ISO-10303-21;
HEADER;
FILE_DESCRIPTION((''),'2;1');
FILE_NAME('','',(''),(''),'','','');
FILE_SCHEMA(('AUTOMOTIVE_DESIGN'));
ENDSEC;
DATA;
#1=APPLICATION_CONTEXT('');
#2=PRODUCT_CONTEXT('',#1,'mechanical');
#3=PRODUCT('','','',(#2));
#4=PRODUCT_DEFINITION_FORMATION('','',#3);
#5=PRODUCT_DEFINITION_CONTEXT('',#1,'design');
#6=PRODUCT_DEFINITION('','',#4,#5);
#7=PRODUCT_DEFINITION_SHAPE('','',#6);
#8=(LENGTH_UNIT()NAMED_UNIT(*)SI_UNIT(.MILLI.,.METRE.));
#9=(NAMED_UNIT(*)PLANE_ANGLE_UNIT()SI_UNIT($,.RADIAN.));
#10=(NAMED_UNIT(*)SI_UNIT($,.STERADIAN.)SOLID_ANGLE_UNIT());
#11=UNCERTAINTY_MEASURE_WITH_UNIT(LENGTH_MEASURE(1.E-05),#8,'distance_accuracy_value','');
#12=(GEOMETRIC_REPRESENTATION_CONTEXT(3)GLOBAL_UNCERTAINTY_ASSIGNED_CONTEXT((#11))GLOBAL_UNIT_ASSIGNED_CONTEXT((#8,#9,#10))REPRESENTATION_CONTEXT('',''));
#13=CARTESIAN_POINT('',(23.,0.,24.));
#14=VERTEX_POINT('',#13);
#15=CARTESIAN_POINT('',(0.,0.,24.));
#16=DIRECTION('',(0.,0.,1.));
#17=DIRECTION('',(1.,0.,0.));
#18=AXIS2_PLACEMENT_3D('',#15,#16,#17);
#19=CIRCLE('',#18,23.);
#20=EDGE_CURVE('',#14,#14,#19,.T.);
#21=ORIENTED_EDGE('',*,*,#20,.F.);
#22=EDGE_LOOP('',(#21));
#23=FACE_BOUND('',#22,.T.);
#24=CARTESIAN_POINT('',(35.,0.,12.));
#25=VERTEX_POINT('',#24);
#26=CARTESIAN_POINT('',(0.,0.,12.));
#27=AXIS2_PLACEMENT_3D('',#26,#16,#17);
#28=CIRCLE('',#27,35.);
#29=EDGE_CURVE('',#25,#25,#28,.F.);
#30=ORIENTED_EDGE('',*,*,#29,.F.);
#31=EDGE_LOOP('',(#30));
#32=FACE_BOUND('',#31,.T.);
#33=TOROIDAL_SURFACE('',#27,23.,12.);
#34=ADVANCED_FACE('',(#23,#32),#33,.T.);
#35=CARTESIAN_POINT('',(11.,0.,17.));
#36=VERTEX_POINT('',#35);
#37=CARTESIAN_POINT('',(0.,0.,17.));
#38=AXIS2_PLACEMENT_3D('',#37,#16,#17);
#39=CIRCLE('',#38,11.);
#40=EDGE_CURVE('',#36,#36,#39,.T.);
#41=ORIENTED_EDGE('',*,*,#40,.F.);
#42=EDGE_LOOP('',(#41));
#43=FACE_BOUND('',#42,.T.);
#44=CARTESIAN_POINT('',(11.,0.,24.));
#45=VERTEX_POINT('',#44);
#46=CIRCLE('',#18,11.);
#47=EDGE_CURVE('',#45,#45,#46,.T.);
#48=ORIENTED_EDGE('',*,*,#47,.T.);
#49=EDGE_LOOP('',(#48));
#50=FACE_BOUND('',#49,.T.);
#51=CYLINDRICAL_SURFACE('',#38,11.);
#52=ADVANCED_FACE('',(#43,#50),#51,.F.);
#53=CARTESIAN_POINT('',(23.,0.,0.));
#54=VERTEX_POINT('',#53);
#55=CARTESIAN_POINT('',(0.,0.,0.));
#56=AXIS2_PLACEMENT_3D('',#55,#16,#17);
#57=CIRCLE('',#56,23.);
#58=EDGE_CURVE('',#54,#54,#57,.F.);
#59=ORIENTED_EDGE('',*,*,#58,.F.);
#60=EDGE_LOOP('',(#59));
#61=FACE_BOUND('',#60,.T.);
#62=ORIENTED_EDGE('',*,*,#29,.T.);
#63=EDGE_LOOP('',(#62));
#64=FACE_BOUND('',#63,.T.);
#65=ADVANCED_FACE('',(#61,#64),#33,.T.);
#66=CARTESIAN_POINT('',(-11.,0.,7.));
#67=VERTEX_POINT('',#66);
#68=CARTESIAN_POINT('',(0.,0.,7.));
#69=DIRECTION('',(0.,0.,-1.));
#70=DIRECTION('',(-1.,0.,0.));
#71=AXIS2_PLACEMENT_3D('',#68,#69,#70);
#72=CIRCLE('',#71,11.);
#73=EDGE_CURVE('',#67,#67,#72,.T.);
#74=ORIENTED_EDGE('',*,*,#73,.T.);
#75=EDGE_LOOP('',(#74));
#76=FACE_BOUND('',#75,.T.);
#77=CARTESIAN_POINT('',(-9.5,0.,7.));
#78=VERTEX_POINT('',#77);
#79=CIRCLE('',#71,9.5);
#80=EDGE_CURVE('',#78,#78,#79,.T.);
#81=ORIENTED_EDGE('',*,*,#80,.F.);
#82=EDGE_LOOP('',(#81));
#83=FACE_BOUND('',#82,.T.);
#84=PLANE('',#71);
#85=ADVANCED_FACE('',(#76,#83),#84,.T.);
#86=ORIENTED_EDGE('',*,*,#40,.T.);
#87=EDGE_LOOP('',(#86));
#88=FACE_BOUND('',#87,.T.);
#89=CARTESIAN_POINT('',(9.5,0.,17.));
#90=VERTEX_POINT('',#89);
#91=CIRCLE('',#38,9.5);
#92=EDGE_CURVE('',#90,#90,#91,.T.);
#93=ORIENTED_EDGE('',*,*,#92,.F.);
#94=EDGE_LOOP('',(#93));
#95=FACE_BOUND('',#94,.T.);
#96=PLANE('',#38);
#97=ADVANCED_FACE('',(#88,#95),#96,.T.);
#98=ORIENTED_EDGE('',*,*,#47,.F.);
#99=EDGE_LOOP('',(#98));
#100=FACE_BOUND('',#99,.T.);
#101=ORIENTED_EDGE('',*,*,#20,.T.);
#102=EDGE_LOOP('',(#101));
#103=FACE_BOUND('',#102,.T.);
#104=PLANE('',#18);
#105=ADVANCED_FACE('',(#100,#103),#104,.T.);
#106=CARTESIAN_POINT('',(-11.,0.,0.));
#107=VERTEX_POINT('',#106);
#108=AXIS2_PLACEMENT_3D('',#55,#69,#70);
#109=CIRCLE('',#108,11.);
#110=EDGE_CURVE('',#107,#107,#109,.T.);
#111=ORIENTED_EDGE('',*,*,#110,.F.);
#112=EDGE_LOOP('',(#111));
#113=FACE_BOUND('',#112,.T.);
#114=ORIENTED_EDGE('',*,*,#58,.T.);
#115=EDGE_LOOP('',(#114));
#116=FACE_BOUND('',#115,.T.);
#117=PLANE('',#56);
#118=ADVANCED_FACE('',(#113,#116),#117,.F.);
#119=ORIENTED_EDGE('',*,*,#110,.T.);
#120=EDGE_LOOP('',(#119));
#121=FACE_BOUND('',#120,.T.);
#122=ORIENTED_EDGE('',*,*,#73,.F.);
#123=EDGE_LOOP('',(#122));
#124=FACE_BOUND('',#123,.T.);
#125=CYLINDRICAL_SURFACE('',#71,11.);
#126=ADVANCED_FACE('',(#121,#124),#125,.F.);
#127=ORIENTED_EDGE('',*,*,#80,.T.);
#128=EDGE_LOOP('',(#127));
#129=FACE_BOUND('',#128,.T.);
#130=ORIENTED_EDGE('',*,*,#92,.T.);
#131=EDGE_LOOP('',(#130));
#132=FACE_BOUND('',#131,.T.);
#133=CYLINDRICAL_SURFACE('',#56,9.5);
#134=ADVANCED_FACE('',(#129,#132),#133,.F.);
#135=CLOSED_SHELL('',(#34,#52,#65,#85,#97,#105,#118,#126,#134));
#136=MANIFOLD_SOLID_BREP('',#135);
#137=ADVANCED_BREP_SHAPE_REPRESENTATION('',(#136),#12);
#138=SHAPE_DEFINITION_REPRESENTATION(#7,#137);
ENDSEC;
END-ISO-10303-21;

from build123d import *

# Parameters (mm, degrees)
ESQUISSE1_R             = 35
EXTRUSION1_DEPTH        = 24
CONG_1_R                = 12
CONG_2_R                = 12
ESQUISSE2_R             = 11
ENL_V_MAT_EXTRU_1_DEPTH = 7
ENL_V_START             = -7
ESQUISSE3_R             = 11
ENL_V_MAT_EXTRU_2_DEPTH = 7
ESQUISSE5_R             = 9.5
ENL_V_MAT_EXTRU_3_DEPTH = 53.335456499


with BuildPart() as part:
    # Esquisse1 → Extrusion1 (new body)
    with BuildSketch(Plane.XY):
        Circle(ESQUISSE1_R)
    extrude(amount=EXTRUSION1_DEPTH)

    # Congé1
    cong_1_edges = [part.edges().sort_by_distance(p)[0] for p in [
        (-35, 0, 24),
    ]]
    fillet(cong_1_edges, radius=CONG_1_R)

    # Congé2
    cong_2_edges = [part.edges().sort_by_distance(p)[0] for p in [
        (-35, 0, 0),
    ]]
    fillet(cong_2_edges, radius=CONG_2_R - 0.0001)  # a hair under: the kernel refuses the full size

    # Esquisse2 → Enlèv. mat.-Extru.1 (cut)
    with BuildSketch(Plane.XY.offset(24)):
        Circle(ESQUISSE2_R)
    extrude(amount=-ENL_V_MAT_EXTRU_1_DEPTH, mode=Mode.SUBTRACT)

    # Esquisse3 → Enlèv. mat.-Extru.2 (cut)
    with BuildSketch(Plane(origin=(0, 0, 0), x_dir=(-1, 0, 0), z_dir=(0, 0, -1)).offset(ENL_V_START)):
        with Locations(Location((0, 0, 0), (0, 0, 180))):
            Circle(ESQUISSE3_R)
    extrude(amount=ENL_V_MAT_EXTRU_2_DEPTH, mode=Mode.SUBTRACT)

    # Esquisse5 → Enlèv. mat.-Extru.3 (cut, through all)
    with BuildSketch(Plane.XY.offset(17)):
        Circle(ESQUISSE5_R)
    extrude(amount=-ENL_V_MAT_EXTRU_3_DEPTH, mode=Mode.SUBTRACT)


solid = part.part
